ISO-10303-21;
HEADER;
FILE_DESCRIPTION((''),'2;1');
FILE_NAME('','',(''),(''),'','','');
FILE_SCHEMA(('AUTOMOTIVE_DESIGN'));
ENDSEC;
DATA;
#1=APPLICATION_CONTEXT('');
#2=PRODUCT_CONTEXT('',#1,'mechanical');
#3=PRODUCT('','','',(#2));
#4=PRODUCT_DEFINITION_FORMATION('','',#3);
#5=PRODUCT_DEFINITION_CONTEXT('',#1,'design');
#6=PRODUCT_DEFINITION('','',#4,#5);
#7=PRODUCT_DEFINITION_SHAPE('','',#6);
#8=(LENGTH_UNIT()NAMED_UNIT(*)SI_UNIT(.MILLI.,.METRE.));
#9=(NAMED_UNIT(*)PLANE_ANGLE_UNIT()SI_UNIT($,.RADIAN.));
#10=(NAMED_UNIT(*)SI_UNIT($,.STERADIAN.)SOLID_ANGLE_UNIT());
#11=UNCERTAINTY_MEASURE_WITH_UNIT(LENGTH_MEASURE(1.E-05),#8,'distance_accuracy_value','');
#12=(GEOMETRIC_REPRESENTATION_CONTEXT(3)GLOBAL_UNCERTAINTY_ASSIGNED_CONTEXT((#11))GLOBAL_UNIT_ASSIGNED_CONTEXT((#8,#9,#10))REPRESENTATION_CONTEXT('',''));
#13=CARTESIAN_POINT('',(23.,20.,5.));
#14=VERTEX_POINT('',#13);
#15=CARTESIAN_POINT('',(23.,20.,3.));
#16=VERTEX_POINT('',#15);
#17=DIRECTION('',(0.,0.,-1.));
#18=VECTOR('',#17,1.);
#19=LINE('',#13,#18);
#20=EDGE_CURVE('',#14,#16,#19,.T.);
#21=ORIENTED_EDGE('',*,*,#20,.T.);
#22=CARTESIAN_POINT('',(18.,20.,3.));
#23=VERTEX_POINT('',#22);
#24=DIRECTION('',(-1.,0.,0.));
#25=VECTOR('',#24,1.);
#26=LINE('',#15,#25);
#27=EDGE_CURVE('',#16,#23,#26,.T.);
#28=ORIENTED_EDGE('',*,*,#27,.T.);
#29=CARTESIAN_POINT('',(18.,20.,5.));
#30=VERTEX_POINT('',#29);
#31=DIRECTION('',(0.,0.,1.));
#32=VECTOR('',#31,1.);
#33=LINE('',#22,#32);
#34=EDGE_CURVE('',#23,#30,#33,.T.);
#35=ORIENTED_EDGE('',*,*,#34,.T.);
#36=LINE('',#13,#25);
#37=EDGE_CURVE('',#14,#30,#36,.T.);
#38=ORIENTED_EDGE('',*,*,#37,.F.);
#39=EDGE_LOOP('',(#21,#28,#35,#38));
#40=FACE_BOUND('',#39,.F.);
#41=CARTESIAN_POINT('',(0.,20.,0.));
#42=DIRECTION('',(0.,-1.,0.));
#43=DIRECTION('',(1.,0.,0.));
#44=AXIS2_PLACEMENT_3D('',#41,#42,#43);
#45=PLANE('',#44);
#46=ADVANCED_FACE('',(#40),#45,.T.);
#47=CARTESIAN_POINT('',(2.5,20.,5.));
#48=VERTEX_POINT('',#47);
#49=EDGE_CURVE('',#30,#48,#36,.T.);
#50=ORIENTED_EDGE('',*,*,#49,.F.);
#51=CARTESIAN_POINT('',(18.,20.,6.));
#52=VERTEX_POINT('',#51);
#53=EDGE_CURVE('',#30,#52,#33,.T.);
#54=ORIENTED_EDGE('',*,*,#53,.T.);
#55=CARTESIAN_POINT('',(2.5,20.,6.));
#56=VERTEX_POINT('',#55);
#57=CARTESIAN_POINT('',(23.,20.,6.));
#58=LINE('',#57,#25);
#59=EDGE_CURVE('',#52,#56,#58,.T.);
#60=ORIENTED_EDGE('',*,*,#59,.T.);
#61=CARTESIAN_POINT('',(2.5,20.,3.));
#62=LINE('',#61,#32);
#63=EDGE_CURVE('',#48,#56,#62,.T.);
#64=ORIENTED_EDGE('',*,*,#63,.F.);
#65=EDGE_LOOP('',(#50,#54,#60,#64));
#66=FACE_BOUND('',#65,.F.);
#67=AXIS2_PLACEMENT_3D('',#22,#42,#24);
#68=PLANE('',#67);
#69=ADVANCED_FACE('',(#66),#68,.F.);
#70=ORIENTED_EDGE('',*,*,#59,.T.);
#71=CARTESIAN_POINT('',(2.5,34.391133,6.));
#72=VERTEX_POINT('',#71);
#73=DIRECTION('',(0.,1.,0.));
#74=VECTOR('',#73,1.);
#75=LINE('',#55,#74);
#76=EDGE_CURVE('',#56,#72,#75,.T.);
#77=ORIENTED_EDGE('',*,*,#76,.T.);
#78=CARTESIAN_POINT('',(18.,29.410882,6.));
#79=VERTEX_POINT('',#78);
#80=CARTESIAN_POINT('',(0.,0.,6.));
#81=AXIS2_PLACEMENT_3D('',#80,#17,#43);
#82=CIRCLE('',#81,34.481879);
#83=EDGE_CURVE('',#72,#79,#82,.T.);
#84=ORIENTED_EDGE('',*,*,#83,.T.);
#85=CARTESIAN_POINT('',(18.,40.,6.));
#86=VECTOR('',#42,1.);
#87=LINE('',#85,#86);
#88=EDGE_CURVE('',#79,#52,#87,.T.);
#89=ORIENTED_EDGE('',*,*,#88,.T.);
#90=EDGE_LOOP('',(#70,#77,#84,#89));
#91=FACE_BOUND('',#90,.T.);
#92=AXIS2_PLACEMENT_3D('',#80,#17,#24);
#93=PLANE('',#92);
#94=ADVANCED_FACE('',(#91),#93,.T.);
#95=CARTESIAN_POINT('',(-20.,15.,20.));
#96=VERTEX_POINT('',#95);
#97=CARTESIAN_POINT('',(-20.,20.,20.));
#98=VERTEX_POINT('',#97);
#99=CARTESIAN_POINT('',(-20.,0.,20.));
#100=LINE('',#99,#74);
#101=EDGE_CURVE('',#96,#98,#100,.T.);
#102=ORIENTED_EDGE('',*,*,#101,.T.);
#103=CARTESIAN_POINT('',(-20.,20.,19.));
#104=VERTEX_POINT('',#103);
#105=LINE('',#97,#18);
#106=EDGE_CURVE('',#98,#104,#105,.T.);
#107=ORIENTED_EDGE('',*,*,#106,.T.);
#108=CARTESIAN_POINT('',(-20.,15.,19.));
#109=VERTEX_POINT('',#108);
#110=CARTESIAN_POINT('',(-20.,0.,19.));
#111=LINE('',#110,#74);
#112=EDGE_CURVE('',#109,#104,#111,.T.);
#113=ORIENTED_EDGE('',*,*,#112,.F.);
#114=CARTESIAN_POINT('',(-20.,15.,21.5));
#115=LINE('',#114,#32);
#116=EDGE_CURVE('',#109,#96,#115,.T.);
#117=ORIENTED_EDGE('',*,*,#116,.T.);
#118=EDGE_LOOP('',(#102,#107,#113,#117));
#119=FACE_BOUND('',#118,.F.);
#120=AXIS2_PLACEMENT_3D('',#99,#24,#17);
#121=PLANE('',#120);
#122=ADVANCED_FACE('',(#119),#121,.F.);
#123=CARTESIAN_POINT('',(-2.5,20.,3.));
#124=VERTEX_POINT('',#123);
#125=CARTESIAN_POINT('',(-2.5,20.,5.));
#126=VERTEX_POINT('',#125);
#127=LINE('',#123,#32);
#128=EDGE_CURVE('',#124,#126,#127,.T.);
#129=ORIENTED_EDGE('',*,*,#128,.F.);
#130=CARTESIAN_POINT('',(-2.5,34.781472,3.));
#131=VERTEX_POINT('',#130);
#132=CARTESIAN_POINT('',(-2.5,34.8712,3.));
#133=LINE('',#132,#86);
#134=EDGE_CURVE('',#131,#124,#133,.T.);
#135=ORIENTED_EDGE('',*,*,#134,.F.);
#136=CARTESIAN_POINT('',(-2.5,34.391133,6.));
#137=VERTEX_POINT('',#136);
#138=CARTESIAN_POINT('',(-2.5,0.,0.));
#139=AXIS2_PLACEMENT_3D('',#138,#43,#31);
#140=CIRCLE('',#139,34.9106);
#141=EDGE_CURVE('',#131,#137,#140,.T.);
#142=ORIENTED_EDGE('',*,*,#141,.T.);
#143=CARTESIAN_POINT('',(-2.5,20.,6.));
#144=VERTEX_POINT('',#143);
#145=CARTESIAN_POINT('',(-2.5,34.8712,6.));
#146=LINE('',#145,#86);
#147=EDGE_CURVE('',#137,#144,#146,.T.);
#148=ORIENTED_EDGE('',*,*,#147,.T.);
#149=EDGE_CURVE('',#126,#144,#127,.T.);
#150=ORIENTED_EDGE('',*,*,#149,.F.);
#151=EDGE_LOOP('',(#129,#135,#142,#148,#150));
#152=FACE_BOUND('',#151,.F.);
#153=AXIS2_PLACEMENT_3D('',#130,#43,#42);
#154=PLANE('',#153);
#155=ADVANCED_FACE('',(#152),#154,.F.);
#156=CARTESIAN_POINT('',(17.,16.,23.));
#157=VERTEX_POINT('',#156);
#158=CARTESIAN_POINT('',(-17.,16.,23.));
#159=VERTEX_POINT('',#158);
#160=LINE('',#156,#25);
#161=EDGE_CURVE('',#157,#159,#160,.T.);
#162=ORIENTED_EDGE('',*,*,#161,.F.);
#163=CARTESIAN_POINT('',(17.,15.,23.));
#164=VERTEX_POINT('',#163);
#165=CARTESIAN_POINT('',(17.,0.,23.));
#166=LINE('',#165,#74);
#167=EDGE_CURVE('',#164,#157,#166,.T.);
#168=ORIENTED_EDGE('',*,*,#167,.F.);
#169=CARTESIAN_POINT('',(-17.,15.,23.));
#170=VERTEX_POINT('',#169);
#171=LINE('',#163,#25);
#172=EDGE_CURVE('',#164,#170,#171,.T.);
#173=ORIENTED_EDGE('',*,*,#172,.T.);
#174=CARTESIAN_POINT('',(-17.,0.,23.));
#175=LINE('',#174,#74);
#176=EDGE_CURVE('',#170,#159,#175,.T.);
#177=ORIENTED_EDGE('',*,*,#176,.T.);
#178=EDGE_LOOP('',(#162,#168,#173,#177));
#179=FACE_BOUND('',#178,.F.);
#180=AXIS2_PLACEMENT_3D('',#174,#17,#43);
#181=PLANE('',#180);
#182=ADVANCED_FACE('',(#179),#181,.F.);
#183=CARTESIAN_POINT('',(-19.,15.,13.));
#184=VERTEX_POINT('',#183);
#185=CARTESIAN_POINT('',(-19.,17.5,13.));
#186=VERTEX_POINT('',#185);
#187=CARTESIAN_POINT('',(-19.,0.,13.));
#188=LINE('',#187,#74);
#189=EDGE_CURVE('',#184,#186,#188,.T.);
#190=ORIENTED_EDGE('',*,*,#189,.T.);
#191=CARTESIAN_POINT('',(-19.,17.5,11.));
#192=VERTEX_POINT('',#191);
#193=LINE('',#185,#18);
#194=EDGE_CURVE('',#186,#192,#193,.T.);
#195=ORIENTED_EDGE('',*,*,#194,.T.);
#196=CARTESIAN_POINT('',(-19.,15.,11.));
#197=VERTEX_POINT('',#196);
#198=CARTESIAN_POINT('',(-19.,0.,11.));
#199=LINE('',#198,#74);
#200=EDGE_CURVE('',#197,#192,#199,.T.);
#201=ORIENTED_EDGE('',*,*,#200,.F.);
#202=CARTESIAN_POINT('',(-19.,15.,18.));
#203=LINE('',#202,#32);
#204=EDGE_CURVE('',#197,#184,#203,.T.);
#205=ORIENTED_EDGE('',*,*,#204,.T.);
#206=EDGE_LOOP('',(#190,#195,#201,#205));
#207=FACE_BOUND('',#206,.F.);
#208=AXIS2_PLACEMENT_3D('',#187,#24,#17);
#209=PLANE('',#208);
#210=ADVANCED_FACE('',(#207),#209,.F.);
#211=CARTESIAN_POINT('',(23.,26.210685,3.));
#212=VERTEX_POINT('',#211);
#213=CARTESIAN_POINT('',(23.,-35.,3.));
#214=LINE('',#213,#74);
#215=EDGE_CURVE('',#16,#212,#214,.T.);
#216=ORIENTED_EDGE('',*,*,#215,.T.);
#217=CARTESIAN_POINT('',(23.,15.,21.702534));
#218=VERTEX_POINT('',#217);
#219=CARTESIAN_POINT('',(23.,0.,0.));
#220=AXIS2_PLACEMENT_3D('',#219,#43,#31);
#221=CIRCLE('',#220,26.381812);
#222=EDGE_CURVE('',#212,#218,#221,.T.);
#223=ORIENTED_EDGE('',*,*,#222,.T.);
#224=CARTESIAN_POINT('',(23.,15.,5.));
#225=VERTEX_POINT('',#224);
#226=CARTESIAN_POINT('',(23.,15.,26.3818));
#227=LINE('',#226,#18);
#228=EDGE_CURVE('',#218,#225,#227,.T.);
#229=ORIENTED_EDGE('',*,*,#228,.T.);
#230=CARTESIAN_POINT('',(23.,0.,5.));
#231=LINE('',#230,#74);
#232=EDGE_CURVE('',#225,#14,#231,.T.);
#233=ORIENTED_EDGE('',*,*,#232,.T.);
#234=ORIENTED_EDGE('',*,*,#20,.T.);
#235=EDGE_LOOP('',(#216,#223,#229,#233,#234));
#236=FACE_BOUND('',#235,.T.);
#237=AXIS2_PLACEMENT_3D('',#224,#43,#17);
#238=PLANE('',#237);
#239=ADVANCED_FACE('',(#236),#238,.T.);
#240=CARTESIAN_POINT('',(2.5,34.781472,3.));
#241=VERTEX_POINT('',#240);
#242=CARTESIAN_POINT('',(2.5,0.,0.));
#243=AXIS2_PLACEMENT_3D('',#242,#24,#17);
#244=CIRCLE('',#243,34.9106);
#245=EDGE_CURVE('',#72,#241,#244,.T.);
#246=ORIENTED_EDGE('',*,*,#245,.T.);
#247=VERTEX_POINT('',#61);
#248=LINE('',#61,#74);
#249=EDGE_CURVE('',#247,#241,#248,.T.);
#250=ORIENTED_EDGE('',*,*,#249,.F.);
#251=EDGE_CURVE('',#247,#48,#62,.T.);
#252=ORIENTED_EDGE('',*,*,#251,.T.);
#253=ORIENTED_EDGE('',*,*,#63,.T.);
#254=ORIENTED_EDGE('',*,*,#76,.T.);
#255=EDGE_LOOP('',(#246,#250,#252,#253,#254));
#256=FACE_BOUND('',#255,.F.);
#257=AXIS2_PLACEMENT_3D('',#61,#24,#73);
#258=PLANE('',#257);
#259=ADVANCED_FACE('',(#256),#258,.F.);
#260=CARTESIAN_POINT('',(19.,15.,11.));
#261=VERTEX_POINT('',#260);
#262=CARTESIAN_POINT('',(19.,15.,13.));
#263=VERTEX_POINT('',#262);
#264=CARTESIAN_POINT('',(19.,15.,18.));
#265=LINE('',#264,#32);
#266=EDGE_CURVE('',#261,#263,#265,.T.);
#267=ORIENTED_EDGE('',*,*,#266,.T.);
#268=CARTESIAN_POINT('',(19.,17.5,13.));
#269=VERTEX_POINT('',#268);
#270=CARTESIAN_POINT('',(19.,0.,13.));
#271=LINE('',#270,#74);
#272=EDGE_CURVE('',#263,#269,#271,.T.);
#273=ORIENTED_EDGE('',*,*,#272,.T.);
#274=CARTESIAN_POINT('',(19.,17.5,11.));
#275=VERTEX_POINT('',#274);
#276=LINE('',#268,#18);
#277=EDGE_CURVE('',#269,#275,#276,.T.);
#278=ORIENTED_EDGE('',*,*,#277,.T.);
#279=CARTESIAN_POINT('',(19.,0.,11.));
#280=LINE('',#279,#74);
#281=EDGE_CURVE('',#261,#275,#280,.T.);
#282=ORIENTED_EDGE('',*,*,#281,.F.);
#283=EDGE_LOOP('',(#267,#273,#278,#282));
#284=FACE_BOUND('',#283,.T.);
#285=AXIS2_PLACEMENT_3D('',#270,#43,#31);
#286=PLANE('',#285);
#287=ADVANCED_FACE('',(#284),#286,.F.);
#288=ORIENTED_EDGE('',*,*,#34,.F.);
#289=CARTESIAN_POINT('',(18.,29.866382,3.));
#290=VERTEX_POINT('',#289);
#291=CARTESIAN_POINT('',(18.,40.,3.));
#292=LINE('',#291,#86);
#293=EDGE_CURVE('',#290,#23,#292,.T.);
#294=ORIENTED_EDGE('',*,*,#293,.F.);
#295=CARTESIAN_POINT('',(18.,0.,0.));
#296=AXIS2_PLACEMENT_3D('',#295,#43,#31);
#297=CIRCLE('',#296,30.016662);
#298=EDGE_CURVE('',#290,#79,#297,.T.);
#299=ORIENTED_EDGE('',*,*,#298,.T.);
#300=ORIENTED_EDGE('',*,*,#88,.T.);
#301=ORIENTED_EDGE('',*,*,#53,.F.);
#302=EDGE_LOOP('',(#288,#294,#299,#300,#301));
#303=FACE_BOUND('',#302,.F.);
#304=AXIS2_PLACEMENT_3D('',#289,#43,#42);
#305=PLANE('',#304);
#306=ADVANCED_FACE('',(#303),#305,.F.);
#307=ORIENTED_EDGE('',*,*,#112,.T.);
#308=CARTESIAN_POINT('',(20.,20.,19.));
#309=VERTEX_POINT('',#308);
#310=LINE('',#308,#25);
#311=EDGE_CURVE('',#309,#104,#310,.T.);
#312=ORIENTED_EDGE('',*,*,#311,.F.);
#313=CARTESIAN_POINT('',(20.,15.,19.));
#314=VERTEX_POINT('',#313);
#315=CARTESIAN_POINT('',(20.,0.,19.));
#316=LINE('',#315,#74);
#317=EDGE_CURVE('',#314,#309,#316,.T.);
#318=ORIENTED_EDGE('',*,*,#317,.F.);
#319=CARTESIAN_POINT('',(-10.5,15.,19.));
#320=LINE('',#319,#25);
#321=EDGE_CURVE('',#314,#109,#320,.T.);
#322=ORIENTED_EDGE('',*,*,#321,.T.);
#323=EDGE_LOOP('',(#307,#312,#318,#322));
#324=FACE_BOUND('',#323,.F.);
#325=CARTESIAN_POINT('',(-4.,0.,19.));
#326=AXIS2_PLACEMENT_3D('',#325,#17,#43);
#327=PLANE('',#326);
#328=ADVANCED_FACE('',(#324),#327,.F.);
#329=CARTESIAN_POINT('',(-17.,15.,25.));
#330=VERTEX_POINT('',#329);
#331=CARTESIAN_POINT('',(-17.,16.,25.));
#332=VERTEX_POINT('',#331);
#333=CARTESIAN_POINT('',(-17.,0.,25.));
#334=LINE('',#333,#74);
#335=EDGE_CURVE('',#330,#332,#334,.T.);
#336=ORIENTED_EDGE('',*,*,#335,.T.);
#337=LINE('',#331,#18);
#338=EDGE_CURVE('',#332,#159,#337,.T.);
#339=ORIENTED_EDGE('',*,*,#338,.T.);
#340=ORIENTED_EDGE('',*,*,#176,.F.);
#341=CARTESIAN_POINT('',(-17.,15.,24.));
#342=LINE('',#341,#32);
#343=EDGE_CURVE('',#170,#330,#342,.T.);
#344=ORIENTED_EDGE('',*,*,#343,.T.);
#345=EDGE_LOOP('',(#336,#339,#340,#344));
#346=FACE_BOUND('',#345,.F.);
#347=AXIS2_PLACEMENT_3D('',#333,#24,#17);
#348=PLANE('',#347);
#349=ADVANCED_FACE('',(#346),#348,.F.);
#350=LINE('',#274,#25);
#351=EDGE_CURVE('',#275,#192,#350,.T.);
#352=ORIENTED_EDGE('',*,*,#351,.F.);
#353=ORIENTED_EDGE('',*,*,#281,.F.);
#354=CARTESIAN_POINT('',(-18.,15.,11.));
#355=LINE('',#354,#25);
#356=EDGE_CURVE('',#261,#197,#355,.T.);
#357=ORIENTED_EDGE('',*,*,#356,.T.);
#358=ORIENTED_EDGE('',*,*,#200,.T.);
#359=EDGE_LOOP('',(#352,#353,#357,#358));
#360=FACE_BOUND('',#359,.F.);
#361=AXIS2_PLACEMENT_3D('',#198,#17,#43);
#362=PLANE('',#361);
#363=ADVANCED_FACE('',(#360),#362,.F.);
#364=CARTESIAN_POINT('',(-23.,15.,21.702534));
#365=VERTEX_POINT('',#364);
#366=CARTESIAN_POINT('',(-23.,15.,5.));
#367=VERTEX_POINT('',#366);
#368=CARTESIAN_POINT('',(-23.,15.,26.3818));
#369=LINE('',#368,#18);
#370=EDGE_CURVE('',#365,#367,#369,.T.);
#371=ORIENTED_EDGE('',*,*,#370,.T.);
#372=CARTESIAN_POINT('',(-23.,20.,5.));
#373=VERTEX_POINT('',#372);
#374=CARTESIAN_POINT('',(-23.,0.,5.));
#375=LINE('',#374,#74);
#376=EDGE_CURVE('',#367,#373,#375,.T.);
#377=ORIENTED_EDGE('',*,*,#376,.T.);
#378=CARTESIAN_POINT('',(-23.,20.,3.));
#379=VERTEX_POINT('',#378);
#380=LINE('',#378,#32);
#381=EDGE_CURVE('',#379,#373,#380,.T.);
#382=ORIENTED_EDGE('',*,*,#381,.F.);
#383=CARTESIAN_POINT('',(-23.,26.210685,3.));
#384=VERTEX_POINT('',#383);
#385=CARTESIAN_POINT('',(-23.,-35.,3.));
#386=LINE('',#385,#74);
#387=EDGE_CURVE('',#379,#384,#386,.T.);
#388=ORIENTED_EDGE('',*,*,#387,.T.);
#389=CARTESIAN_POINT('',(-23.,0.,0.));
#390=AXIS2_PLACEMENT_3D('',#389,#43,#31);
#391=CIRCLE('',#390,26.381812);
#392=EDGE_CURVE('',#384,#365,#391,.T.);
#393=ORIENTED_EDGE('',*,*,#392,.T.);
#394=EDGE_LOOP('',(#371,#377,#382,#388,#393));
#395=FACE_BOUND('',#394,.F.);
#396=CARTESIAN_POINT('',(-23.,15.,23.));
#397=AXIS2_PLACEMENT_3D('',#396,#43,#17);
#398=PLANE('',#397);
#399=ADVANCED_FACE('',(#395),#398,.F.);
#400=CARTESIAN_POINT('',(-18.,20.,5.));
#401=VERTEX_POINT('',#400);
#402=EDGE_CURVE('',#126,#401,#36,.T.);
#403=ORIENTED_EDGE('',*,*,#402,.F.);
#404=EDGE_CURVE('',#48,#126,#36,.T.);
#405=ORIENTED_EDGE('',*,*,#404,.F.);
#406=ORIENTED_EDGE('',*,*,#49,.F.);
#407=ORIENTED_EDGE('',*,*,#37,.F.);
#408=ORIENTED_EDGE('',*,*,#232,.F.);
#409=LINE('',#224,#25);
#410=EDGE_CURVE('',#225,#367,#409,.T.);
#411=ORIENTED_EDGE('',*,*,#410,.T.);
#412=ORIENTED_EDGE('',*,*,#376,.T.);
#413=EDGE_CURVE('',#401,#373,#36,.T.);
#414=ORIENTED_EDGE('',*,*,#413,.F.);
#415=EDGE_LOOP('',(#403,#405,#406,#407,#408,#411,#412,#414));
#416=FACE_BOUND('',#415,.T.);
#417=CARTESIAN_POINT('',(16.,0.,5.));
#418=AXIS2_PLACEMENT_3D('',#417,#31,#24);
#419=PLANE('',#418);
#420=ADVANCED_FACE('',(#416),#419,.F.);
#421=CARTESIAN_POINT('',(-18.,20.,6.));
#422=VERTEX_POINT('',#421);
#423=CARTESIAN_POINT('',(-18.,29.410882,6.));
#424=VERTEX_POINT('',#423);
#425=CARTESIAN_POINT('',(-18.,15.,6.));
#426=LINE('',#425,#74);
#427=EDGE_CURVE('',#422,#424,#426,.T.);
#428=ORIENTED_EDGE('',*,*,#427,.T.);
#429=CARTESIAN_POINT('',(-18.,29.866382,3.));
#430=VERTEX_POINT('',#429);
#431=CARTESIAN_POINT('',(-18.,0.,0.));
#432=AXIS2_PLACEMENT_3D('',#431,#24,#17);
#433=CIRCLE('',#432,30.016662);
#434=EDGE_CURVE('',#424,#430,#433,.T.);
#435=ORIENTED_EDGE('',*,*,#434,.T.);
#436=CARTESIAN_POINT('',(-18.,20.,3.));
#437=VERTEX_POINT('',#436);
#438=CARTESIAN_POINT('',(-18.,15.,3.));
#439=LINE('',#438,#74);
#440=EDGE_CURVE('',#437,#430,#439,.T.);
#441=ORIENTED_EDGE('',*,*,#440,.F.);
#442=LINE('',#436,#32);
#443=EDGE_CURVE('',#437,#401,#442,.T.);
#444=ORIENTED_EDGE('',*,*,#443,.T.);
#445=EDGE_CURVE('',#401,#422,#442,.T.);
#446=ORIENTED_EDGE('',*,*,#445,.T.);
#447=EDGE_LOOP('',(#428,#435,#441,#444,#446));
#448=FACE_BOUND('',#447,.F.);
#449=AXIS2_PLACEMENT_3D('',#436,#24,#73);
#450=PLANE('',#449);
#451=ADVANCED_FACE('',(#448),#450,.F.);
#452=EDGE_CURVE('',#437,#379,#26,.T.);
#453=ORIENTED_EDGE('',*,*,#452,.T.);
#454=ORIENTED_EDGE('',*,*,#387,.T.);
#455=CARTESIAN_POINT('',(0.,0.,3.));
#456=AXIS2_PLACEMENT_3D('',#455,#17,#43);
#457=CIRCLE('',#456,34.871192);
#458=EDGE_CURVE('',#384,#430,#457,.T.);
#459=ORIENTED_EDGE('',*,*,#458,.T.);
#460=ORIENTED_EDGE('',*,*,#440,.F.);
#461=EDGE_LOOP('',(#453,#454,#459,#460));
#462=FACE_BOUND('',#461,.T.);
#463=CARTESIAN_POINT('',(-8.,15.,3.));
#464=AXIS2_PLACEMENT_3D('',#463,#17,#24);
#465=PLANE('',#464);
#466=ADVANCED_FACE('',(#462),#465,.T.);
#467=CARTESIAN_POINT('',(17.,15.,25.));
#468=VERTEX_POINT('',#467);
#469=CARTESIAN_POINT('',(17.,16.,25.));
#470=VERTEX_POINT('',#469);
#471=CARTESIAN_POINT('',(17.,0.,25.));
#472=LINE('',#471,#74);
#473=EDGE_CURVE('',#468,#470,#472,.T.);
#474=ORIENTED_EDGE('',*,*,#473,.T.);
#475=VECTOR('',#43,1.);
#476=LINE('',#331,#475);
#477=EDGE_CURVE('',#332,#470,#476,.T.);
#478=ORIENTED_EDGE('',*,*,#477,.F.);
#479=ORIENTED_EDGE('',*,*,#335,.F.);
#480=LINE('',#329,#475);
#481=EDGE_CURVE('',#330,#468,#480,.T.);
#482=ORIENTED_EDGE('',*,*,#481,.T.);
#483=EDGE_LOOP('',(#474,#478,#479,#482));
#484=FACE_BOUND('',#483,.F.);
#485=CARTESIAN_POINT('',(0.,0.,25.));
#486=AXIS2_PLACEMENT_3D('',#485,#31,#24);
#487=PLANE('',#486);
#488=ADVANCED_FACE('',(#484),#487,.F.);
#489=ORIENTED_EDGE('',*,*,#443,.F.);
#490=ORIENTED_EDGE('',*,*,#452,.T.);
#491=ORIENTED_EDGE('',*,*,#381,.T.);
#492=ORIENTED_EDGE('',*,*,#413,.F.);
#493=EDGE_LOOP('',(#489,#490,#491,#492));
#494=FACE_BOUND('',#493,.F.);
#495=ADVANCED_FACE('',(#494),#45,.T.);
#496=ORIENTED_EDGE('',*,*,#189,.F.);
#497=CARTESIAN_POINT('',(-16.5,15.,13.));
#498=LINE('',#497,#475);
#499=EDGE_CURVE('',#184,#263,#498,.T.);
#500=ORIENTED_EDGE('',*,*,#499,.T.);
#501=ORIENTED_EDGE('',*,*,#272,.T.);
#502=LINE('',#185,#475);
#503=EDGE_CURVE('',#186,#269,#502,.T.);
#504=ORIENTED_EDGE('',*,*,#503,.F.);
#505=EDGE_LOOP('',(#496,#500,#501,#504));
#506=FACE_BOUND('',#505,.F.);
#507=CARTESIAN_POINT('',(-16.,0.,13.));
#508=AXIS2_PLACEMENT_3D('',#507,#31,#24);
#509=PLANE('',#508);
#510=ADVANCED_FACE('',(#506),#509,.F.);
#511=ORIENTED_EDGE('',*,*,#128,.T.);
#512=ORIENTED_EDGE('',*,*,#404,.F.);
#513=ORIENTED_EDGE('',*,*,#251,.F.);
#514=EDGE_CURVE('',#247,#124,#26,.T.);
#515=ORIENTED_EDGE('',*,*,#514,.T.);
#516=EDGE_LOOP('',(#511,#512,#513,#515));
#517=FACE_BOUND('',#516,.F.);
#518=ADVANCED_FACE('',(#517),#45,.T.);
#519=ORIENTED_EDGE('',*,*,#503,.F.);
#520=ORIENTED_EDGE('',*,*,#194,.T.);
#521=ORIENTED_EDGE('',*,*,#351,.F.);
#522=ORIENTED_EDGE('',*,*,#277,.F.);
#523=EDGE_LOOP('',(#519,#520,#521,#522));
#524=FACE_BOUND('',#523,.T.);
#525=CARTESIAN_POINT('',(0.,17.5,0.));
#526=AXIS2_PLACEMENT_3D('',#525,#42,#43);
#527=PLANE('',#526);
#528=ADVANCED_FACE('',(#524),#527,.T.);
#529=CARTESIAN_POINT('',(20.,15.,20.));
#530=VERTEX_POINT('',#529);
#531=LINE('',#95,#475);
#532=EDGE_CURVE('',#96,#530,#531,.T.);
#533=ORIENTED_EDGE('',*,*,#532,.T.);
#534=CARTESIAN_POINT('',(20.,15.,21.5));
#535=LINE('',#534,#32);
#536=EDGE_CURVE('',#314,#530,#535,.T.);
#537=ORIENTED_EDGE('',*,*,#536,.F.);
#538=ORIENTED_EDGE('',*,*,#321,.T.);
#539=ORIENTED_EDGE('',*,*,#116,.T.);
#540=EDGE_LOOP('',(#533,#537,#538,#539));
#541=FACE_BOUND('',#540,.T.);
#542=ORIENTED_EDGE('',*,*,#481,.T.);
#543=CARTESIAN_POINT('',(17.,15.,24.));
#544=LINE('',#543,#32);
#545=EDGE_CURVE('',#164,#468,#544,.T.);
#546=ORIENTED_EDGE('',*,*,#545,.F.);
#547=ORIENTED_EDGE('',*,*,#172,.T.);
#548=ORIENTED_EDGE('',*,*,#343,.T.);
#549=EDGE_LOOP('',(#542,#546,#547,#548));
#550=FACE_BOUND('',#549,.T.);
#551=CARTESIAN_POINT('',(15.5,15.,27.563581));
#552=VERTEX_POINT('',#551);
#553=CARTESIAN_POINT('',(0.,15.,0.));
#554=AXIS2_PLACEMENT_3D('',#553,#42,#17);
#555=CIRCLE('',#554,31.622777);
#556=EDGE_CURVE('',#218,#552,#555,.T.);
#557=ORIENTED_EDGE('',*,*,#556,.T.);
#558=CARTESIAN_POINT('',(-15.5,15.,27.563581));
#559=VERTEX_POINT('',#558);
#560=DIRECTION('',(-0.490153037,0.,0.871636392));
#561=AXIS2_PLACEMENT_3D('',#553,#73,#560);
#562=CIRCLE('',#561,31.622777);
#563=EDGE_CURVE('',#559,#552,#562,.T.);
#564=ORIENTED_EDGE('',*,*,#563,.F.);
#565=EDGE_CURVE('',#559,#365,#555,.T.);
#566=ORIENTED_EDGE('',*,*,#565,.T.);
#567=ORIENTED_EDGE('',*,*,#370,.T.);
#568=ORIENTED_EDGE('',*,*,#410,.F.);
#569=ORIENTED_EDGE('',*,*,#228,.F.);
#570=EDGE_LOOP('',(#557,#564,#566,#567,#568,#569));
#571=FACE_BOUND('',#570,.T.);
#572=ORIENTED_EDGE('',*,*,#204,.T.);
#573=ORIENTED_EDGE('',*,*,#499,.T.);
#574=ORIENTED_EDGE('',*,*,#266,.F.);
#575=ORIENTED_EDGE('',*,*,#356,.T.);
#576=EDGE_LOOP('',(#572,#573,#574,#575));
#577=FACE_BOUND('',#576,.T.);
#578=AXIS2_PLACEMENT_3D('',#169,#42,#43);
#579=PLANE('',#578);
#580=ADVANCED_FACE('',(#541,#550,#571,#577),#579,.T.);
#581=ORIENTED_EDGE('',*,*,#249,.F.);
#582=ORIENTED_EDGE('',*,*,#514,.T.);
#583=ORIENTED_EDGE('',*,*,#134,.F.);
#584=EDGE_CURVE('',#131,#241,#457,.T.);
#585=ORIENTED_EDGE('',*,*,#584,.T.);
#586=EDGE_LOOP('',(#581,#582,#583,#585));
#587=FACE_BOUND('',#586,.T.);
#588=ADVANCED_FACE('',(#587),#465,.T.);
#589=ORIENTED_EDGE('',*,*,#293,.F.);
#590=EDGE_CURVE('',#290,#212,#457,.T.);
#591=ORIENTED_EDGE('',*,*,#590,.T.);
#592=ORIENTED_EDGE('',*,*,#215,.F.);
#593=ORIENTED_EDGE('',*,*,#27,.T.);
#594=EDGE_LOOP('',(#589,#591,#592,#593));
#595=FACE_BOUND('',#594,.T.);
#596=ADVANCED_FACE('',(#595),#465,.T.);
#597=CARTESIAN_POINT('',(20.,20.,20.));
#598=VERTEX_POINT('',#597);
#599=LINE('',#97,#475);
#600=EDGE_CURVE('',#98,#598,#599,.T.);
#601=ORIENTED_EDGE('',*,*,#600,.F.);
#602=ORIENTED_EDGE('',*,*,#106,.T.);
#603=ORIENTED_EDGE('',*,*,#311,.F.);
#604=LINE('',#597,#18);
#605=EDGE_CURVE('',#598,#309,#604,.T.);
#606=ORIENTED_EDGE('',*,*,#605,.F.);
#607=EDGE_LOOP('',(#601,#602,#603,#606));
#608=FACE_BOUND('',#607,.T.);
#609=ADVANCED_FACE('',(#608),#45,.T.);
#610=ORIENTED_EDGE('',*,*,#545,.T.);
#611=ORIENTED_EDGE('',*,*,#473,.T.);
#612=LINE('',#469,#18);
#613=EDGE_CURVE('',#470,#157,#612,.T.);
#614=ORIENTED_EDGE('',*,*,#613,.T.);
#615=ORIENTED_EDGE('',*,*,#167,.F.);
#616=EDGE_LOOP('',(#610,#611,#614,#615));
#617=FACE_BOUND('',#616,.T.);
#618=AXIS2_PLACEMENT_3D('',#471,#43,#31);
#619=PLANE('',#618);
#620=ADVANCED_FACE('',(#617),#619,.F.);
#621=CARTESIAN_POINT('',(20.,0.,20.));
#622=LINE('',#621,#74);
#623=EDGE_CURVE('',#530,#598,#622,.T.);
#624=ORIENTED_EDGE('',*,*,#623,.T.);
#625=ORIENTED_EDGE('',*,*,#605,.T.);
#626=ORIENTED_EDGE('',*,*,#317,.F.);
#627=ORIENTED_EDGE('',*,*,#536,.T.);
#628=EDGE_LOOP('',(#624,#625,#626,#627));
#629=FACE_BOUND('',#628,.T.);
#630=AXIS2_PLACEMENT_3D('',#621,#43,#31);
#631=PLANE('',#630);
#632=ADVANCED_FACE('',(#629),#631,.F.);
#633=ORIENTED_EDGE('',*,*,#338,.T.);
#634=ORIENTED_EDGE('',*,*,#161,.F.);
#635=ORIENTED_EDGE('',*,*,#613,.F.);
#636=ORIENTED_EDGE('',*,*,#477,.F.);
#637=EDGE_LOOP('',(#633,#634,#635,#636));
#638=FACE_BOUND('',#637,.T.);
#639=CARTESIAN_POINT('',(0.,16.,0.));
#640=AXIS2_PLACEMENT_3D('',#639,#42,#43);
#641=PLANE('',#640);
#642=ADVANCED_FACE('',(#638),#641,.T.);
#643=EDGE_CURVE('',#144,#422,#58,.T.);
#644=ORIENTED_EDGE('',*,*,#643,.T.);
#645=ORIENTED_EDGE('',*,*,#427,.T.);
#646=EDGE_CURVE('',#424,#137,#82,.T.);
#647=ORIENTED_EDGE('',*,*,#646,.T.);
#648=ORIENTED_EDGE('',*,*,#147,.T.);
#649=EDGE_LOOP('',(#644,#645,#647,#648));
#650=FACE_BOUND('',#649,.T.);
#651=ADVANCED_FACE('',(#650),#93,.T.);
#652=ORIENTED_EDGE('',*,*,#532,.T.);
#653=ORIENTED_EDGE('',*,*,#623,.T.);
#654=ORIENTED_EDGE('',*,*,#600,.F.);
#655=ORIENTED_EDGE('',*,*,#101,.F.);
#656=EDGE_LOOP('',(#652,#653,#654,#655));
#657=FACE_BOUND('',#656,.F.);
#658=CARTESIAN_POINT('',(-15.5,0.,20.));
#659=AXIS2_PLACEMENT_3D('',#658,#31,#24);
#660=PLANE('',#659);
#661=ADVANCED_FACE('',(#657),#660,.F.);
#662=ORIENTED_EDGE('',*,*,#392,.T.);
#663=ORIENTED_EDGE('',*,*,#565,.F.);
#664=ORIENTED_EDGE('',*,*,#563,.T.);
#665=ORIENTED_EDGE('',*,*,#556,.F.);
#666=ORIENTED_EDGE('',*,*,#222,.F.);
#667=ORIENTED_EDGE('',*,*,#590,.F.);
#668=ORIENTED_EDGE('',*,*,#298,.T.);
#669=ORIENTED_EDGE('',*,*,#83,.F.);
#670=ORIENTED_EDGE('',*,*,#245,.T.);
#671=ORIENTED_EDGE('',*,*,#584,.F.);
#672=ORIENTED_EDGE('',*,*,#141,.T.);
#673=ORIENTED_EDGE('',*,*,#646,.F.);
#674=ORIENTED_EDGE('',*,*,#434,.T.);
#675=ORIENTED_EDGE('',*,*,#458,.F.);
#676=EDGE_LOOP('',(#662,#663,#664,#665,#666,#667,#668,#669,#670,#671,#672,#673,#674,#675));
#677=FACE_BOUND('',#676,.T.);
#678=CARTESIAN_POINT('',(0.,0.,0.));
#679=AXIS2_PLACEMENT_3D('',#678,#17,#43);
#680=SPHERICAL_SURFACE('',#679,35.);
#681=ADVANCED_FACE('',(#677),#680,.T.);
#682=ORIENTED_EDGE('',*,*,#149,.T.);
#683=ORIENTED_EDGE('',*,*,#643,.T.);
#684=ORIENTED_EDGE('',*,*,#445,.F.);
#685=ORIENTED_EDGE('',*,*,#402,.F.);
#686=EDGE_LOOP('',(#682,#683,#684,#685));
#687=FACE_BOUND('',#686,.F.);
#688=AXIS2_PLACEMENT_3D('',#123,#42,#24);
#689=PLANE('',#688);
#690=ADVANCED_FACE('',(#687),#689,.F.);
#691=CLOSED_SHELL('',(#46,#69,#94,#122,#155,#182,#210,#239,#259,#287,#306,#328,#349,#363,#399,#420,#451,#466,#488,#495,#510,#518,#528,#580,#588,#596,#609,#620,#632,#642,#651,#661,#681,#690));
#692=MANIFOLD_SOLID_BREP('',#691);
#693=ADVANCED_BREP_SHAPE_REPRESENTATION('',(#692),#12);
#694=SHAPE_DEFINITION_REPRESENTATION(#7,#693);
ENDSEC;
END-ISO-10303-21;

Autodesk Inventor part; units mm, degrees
ref_plane "YZ Plane" through (0, 0, 0) normal (1, 0, 0) x (0, 1, 0)
sketch "スケッチ1" plane through (0, 0, 0) normal (0, 1, 0) x (-1, 0, 0)
  circle A0 centre (0, 0) radius 35
  line L0 (0, 0) -> (0, -35)
  line L1 (0, 0) -> (0, 35)
  dimension "d0" = 70
revolve "回転1" add sketch "スケッチ1" angle 180 about axis through (0, 0, 0) along (0, 0, 1) picked at (-2.5961, -23.0408) contours L1 L0 A0
sketch "スケッチ5" plane through (0, 0, 0) normal (0, -1, 0) x (1, 0, 0)
  line L0 (-20, -23) -> (20, -23)
  line L1 (20, -23) -> (20, -13)
  line L2 (20, -13) -> (-20, -13)
  line L3 (-20, -13) -> (-20, -23)
  line L4 (-20, -15) -> (-20, -13)
  line L5 (0, 25) -> (-17, 25)
  line L6 (-17, 25) -> (-17, 23)
  line L7 (-17, 23) -> (0, 23)
  line L8 (0, 23) -> (0, 25)
  line L9 (0, 20) -> (-20, 20)
  line L10 (-20, 20) -> (-20, 19)
  line L11 (-20, 19) -> (0, 19)
  line L12 (0, 19) -> (0, 20)
  line L13 (0, 13) -> (-19, 13)
  line L14 (-19, 13) -> (-19, 11)
  line L15 (-19, 11) -> (0, 11)
  line L16 (0, 11) -> (0, 13)
  line L17 (0, 5) -> (-23, 5)
  line L18 (-23, 5) -> (-23, 3)
  line L19 (-23, 3) -> (0, 3)
  line L20 (0, 3) -> (0, 5)
  circle A0 centre (0, 0) radius 35 projected
  circle A1 centre (0, 0) radius 35 projected
  line L21 (0, 35) -> (0, -35)
  line L22 (35, 0) -> (-35, 0)
  line L23 (-32, 2) -> (-23, 2)
  line L24 (-23, 2) -> (-23, -8)
  line L25 (-23, -8) -> (-32, -8)
  line L26 (-32, -8) -> (-32, 2)
  line L27 (-23, -8.0262) -> (-23, 2)
  line L28 (-27, 22.2711) -> (-27, -22.2711)
  line L29 (-15.5, 25) -> (0, 25)
  line L30 (0, 25) -> (0, 35)
  line L31 (0, 35) -> (-15.5, 35)
  line L32 (-15.5, 35) -> (-15.5, 25)
  line L33 (-15.5, 23) -> (0, 23)
  line L34 (0, 23) -> (0, 20)
  line L35 (0, 20) -> (-15.5, 20)
  line L36 (-15.5, 20) -> (-15.5, 23)
  line L37 (-16, 13) -> (0, 13)
  line L38 (0, 13) -> (0, 19)
  line L39 (0, 19) -> (-16, 19)
  line L40 (-16, 19) -> (-16, 13)
  line L41 (-16, 11) -> (0, 11)
  line L42 (0, 11) -> (0, 5)
  line L43 (0, 5) -> (-16, 5)
  line L44 (-16, 5) -> (-16, 11)
  line L45 (-23, -3) -> (-39.6865, -3)
  line L46 (-23, -3) -> (-7.8337, -3)
  line L47 (-8, 3) -> (-23, 3)
  line L48 (-23, 3) -> (-23, -9)
  line L49 (-23, -9) -> (-8, -9)
  line L50 (-8, -9) -> (-8, 3)
  line L51 (-8, 3) -> (-23, -9) construction
  line L52 (-23, 3) -> (-8, -9) construction
  line L53 (-23, 4) -> (-33, 4)
  line L54 (-33, 4) -> (-33, -10)
  line L55 (-33, -10) -> (-23, -10)
  line L56 (-23, -10) -> (-23, 4)
  line L57 (-23, 4) -> (-33, -10) construction
  line L58 (-33, 4) -> (-23, -10) construction
  line L59 (-8, 3) -> (-1, 3)
  line L60 (-1, 3) -> (-1, -9)
  line L61 (-1, -9) -> (-8, -9)
  line L62 (-8, -9) -> (-8, 3)
  line L63 (-8, 3) -> (-1, -9) construction
  line L64 (-1, 3) -> (-8, -9) construction
  line L65 (-23, 2) -> (-27, 2)
  line L66 (-23, -8) -> (-27, -8)
  line L67 (-23, 4) -> (-27, 4)
  line L68 (-23, -10) -> (-27, -10)
  line L69 (23.4307, -26) -> (-23.4307, -26)
  line L70 (-8, 3) -> (-6.8, 3)
  line L71 (-6.8, 3) -> (-6.8, -9)
  line L72 (-6.8, -9) -> (-8, -9)
  line L73 (-8, -9) -> (-8, 3)
  line L74 (-3, 5) -> (0, 5)
  line L75 (0, 20) -> (-4, 20)
  line L76 (-4, 19) -> (0, 19)
  line L77 (0, 19) -> (0, 20)
  line L78 (-6, 5) -> (-1, 5)
  line L79 (-1, 3) -> (-6, 3)
  point P0 (0, -23)
  point P1 (0, -13)
  point P2 (0, 24)
  point P3 (0, 19.5)
  point P4 (0, 12)
  point P5 (0, 4)
  point P6 (-20, -18)
  point P7 (-27, -0.5262)
  point P8 (-27, -8)
  point P9 (-15.5, 21.5)
  point P10 (-15.5, 31.3807)
  point P11 (0, 25)
  point P12 (0, 23)
  point P13 (0, 11)
  point P14 (0, 13)
  point P15 (-27, 0)
  point P16 (-32, 0)
  point P17 (-23, 0)
  point P18 (-15.5, -3)
  point P19 (-28, -3)
  point P20 (-4.5, -3)
  point P21 (-8, -9)
  point P22 (-8, 3)
  point P23 (-27, 0.5)
  point P24 (-28, 0.4738)
  point P25 (-28, -11.5262)
  point P26 (-27, -11.5)
  point P27 (-23, 2)
  point P28 (-23, 2)
  point P29 (-8, 0)
  point P30 (-1, 0)
  point P31 (0, 19)
  point P32 (0, 20)
  point P33 (-27, -10)
  point P34 (-27, 4)
  dimension "d12" = 40
  dimension "d13" = 10
  dimension "d23" = 17
  dimension "d24" = 2
  dimension "d27" = 20
  dimension "d28" = 1
  dimension "d30" = 19
  dimension "d31" = 2
  dimension "d33" = 2
  dimension "d88" = 0
  dimension "d89" = 0
  dimension "d90" = 12
  dimension "d92" = 20
  dimension "d93" = 10
  dimension "d97" = 9
  dimension "d98" = 10
  dimension "d113" = 27
  dimension "d122" = 15.5
  dimension "d123" = 35
  dimension "d124" = 3
  dimension "d125" = 15.5
  dimension "d126" = 6
  dimension "d127" = 6
  dimension "d128" = 16
  dimension "d129" = 16
  dimension "d147" = 12
  dimension "d149" = 8
  dimension "d151" = 15
  dimension "d161" = 14
  dimension "d162" = 10
  dimension "d164" = 12
  dimension "d165" = 7
  dimension "d170" = 26
  dimension "d175" = 1.2
  dimension "d207" = 0
extrude "GNSボード" cut sketch "スケッチ5" against normal blind 16 contours L8 L7 L6 L5
extrude "GNSボード止めるよう" cut sketch "スケッチ5" against normal blind 15 contours L21 L5 L32 A0 | L21 L9 L36 L7
extrude "アルミ板１" cut sketch "スケッチ5" against normal blind 20 contours L11 L10 L9 L12
extrude "メイン基板" cut sketch "スケッチ5" against normal blind 17.5 contours L15 L14 L13 L16
extrude "メイン止めるよう" cut sketch "スケッチ5" against normal blind 14.5 contours L17 L44 L15 L21 | L13 L40 L11 L21
extrude "アルミ板２" cut sketch "スケッチ5" against normal blind 20 contours L19 L18 L17 L20
extrude "電池ボックス入れ" cut sketch "スケッチ5" against normal blind 13 contours L3 L2 L21 L0 | L21 L2 L1 L0
extrude "side ut" cut sketch "スケッチ5" against normal blind 100 contours A0 L45 L54 L55 L28 | A0 L22 L54 L45 | L55 L54 L45 L26 L25 L28 | A0 L28 L53 L54 L22 | L54 L22 L26 L45 | L25 L26 L45 L28 | L54 L53 L28 L23 L26 L22 | L26 L22 L28 L45 | L22 L26 L23 L28
extrude "motor case" add sketch "スケッチ5" against normal blind 7 contours L55 L54 L45 L26 L25 L28 | L28 L25 L27 L48 L56 L55 | L50 L46 L24 L22 | L22 L24 L48 L19 L50 | L54 L22 L26 L45 | L28 L45 L24 L25 | L25 L26 L45 L28 | L24 L45 L28 L22 | L22 L28 L23 L24 | L50 L49 L48 L27 L24 L46 | L54 L53 L28 L23 L26 L22 | L26 L22 L28 L45 | L53 L18 L48 L23 L28 | L22 L26 L23 L28
extrude "bottom cut" cut sketch "スケッチ5" against normal blind 90 contours L69 A0 L21 | L21 A0 L69
extrude "motor" cut sketch "スケッチ5" against normal blind 6 contours L60 L61 L71 L22 | L22 L71 L19 L60 | L71 L61 L50 L22 | L22 L50 L19 L71 | L50 L46 L24 L22 | L22 L24 L48 L19 L50 | L28 L45 L24 L25 | L25 L26 L45 L28 | L24 L45 L28 L22 | L22 L28 L23 L24 | L50 L49 L48 L27 L24 L46 | L26 L22 L28 L45 | L22 L26 L23 L28
extrude "motor block" add sketch "スケッチ5" against normal blind 10 contours L71 L61 L50 L22 | L22 L50 L19 L71
sketch "スケッチ27" plane through (-33, 0, -10) normal (-1, 0, 0) x (0, 0, 1)
  line L0 (14, 0) -> (0, 0) projected
  circle A0 centre (7, 0) radius 3
  point P0 (10, 0)
  dimension "d198" = 6
extrude "押し出し36" cut sketch "スケッチ27" against normal blind 27
mirror "ミラー13" about plane through (0, 0, 0) normal (1, 0, 0) of "メイン止めるよう", "メイン基板", "アルミ板１", "GNSボード止めるよう", "GNSボード", "アルミ板２", "motor", "motor case", "押し出し36", "電池ボックス入れ", "side ut", "motor block"
ref_plane "作業平面5" through (-17, 17.5, 23) normal (0, -1, 0) x (1, 0, 0)
ref_plane "作業平面6" through (20, 13, -13) normal (0, 0, -1) x (1, 0, 0)
sketch "スケッチ38" plane through (20, 13, -13) normal (0, 0, -1) x (1, 0, 0)
  line L0 (-40, 13) -> (0, 13) projected
  line L1 (-40, 13) -> (-40, 0) projected
  line L2 (-40, 0) -> (0, 0) projected
  line L3 (0, 13) -> (0, 0) projected
  line L4 (-38, 6) -> (-28, 6)
  line L5 (-28, 6) -> (-28, -3)
  line L6 (-28, -3) -> (-38, -3)
  line L7 (-38, -3) -> (-38, 6)
  point P0 (-20, 13)
  dimension "d235" = 3
  dimension "d236" = 9
  dimension "d237" = 10
  dimension "d238" = 2
extrude "押し出し44" cut sketch "スケッチ38" against normal blind 18 contours L7 L4 L5 L2 | L2 L5 L6 L7
ref_plane "作業平面7" through (27, 35, 4) normal (0, -1, 0) x (1, 0, 0)
sketch "スケッチ41" plane through (-17, 0, 23) normal (0, -1, 0) x (1, 0, 0)
  line L0 (-16, -23) -> (-15, -23) projected
  line L1 (-15, -23) -> (-15, -21) projected
  line L2 (-15, -21) -> (-6, -21) projected
  line L3 (-6, -21) -> (-6, -18) projected
  line L4 (-6, -18) -> (1, -18) projected
  line L5 (1, -18) -> (1, -12) projected
  line L6 (1, -12) -> (-2, -12) projected
  line L7 (-2, -12) -> (-2, -10) projected
  line L8 (-2, -10) -> (1, -10) projected
  line L9 (1, -10) -> (1, -4) projected
  line L10 (1, -4) -> (-3, -4) projected
  line L11 (-3, -4) -> (-3, -3) projected
  line L12 (-3, -3) -> (1.5, -3) projected
  line L13 (1.5, -3) -> (1.5, 0) projected
  line L14 (1.5, 0) -> (0, 0) projected
  line L15 (0, 0) -> (0, 2) projected
  line L16 (0, 2) -> (1.5, 2) projected
  line L17 (1.5, 2) -> (1.5, 8.3807) projected
  arc A0 (1.5, 8.3807) -> (-10, -0.7289) centre (17, -23) ccw projected
  line L18 (-10, -0.7289) -> (-10, -19) projected
  line L19 (-10, -19) -> (-16, -19) projected
  line L20 (-16, -19) -> (-16, -23) projected
  line L21 (1, -18) -> (1, -12) projected
  line L22 (-2, -10) -> (-2, -12) projected
  line L23 (0, 2) -> (0, 0) projected
  circle A1 centre (-4, 0) radius 2
  dimension "d252" = 4
  dimension "d253" = 4
  dimension "d254" = 3
extrude "押し出し46" cut sketch "スケッチ41" against normal blind 10 contours A1
mirror "ミラー15" about plane through (0, 0, 0) normal (1, 0, 0) of "押し出し46"
sketch "スケッチ42" plane through (-33, 0, -10) normal (0, -1, 0) x (1, 0, 0)
  circle A0 centre (9.5, -8) radius 2
  line L0 (13, -13) -> (13, -3) projected
  line L1 (10, 2) -> (1, 2) projected
  point P0 (33, 10)
  dimension "d257" = 3.5
  dimension "d258" = 4
  dimension "d259" = 10
extrude "押し出し47" cut sketch "スケッチ42" against normal blind 10
mirror "ミラー16" about plane through (0, 0, 0) normal (1, 0, 0) of "押し出し47"
ref_plane "作業平面8" through (-17, 15, 23) normal (0, -1, 0) x (1, 0, 0)
sketch "スケッチ45" plane through (-17, 15, 23) normal (0, -1, 0) x (1, 0, 0)
  circle A0 centre (-4, 0) radius 2 projected
  line L0 (-16, -23) -> (-15, -23) projected
  line L1 (-15, -23) -> (-15, -21) projected
  line L2 (-15, -21) -> (-6, -21) projected
  line L3 (-6, -21) -> (-6, -18) projected
  line L4 (-6, -18) -> (1, -18) projected
  line L5 (1, -18) -> (1, -12) projected
  line L6 (1, -12) -> (-2, -12) projected
  line L7 (-2, -12) -> (-2, -10) projected
  line L8 (-2, -10) -> (1, -10) projected
  line L9 (1, -10) -> (1, -4) projected
  line L10 (1, -4) -> (-3, -4) projected
  line L11 (-3, -4) -> (-3, -3) projected
  line L12 (-3, -3) -> (1.5, -3) projected
  line L13 (1.5, -3) -> (1.5, 0) projected
  line L14 (1.5, 0) -> (0, 0) projected
  line L15 (0, 0) -> (0, 2) projected
  line L16 (0, 2) -> (1.5, 2) projected
  line L17 (1.5, 2) -> (1.5, 8.3807) projected
  arc A1 (1.5, 8.3807) -> (-10, -0.7289) centre (17, -23) ccw projected
  line L18 (-10, -0.7289) -> (-10, -19) projected
  line L19 (-10, -19) -> (-16, -19) projected
  line L20 (-16, -19) -> (-16, -23) projected
  arc A2 (32.5, 4.5636) -> (1.5, 4.5636) centre (17, -23) ccw projected
  line L21 (1.5, 2) -> (1.5, 4.5636) projected
  line L22 (32.5, 2) -> (1.5, 2) projected
  line L23 (32.5, 2) -> (32.5, 4.5636) projected
  circle A3 centre (38, 0) radius 2 projected
  circle A4 centre (38, 0) radius 2 projected
  line L24 (49, -23) -> (50, -23) projected
  line L25 (50, -19) -> (50, -23) projected
  line L26 (44, -19) -> (50, -19) projected
  line L27 (44, -19) -> (44, -0.7289) projected
  arc A5 (44, -0.7289) -> (32.5, 8.3807) centre (17, -23) ccw projected
  line L28 (32.5, 8.3807) -> (32.5, 2) projected
  line L29 (32.5, 2) -> (34, 2) projected
  line L30 (34, 2) -> (34, 0) projected
  line L31 (34, 0) -> (32.5, 0) projected
  line L32 (32.5, 0) -> (32.5, -3) projected
  line L33 (32.5, -3) -> (37, -3) projected
  line L34 (37, -3) -> (37, -4) projected
  line L35 (37, -4) -> (33, -4) projected
  line L36 (33, -4) -> (33, -10) projected
  line L37 (33, -10) -> (36, -10) projected
  line L38 (36, -10) -> (36, -12) projected
  line L39 (36, -12) -> (33, -12) projected
  line L40 (33, -12) -> (33, -18) projected
  line L41 (33, -18) -> (40, -18) projected
  line L42 (40, -18) -> (40, -21) projected
  line L43 (40, -21) -> (49, -21) projected
  line L44 (49, -21) -> (49, -23) projected
  circle A6 centre (-4, 0) radius 2 projected
  line L45 (1.5, 0) -> (32.5, 0) projected
  line L46 (32.5, -3) -> (1.5, -3) projected
  line L47 (32.5, -3) -> (32.5, 0) projected
  line L48 (1.5, 0) -> (32.5, 0) projected
  line L49 (1.5, -3) -> (1.5, 0) projected
  line L50 (34, 0) -> (0, 0) projected
  line L51 (34, 0) -> (34, 2) projected
  line L52 (34, 2) -> (0, 2) projected
  line L53 (0, 0) -> (0, 2) projected
  line L54 (33, -10) -> (1, -10) projected
  line L55 (33, -10) -> (33, -4) projected
  line L56 (1, -4) -> (33, -4) projected
  line L57 (1, -10) -> (1, -4) projected
  line L58 (36, -12) -> (-2, -12) projected
  line L59 (36, -12) -> (36, -10) projected
  line L60 (36, -10) -> (-2, -10) projected
  line L61 (-2, -12) -> (-2, -10) projected
  line L62 (33, -18) -> (1, -18) projected
  line L63 (33, -18) -> (33, -12) projected
  line L64 (1, -12) -> (33, -12) projected
  line L65 (1, -18) -> (1, -12) projected
  line L66 (40, -20) -> (-6, -20) projected
  line L67 (40, -20) -> (40, -18) projected
  line L68 (40, -18) -> (-6, -18) projected
  line L69 (-6, -20) -> (-6, -18) projected
  circle A7 centre (40.5, -41) radius 2 projected
  circle A8 centre (-6.5, -41) radius 2 projected
  line L70 (25, -29) -> (23.8, -29) projected
  line L71 (23.8, -32) -> (23.8, -29) projected
  line L72 (23.8, -32) -> (18, -32) projected
  line L73 (18, -32) -> (18, -20) projected
  line L74 (18, -20) -> (16, -20) projected
  line L75 (16, -20) -> (16, -32) projected
  line L76 (16, -32) -> (10.2, -32) projected
  line L77 (10.2, -32) -> (10.2, -29) projected
  line L78 (10.2, -29) -> (9, -29) projected
  line L79 (9, -29) -> (9, -32) projected
  line L80 (9, -32) -> (-6, -32) projected
  line L81 (-6, -32) -> (-6, -31) projected
  line L82 (-6, -31) -> (-15, -31) projected
  line L83 (-15, -31) -> (-15, -29) projected
  line L84 (-15, -29) -> (-16, -29) projected
  line L85 (-16, -29) -> (-16, -33) projected
  line L86 (-16, -33) -> (-10, -33) projected
  line L87 (-10, -33) -> (-10, -45.2711) projected
  arc A9 (-10, -45.2711) -> (-6.4307, -49) centre (17, -23) ccw projected
  line L88 (-6.4307, -49) -> (40.4307, -49) projected
  arc A10 (40.4307, -49) -> (44, -45.2711) centre (17, -23) ccw projected
  line L89 (44, -45.2711) -> (44, -33) projected
  line L90 (50, -33) -> (44, -33) projected
  line L91 (50, -29) -> (50, -33) projected
  line L92 (50, -29) -> (49, -29) projected
  line L93 (49, -29) -> (49, -31) projected
  line L94 (49, -31) -> (40, -31) projected
  line L95 (40, -31) -> (40, -32) projected
  line L96 (40, -32) -> (25, -32) projected
  line L97 (25, -29) -> (25, -32) projected
  line L98 (-3, -36) -> (37, -36) projected
  line L99 (37, -36) -> (37, -46) projected
  line L100 (37, -46) -> (-3, -46) projected
  line L101 (-3, -46) -> (-3, -36) projected
  line L102 (-6, -18) -> (40, -18)
  line L103 (40, -18) -> (40, 8.6228)
  line L104 (40, 8.6228) -> (-6, 8.6228)
  line L105 (-6, 8.6228) -> (-6, -18)
  arc A11 (32.5, 4.5636) -> (1.5, 4.5636) centre (17, -23) ccw projected
  line L106 (32.5, 4.5636) -> (32.5, 8.3807) projected
  arc A12 (44, -0.7289) -> (32.5, 8.3807) centre (17, -23) ccw projected
  line L107 (44, -0.7289) -> (44, -45.2711) projected
  arc A13 (40.4307, -49) -> (44, -45.2711) centre (17, -23) ccw projected
  line L108 (40.4307, -49) -> (-6.4307, -49) projected
  arc A14 (-10, -45.2711) -> (-6.4307, -49) centre (17, -23) ccw projected
  line L109 (-10, -45.2711) -> (-10, -0.7289) projected
  arc A15 (1.5, 8.3807) -> (-10, -0.7289) centre (17, -23) ccw projected
  line L110 (1.5, 8.3807) -> (1.5, 4.5636) projected
  line L111 (9, -32) -> (9, -20) projected
  line L112 (-6, -20) -> (9, -20) projected
  line L113 (-6, -21) -> (-6, -20) projected
  line L114 (-15, -21) -> (-6, -21) projected
  line L115 (-15, -31) -> (-15, -21) projected
  line L116 (-6, -31) -> (-15, -31) projected
  line L117 (-6, -32) -> (-6, -31) projected
  line L118 (9, -32) -> (-6, -32) projected
  line L119 (50, -29) -> (49, -29) projected
  line L120 (50, -23) -> (50, -29) projected
  line L121 (49, -23) -> (50, -23) projected
  line L122 (49, -29) -> (49, -23) projected
  line L123 (-16, -23) -> (-15, -23) projected
  line L124 (-16, -29) -> (-16, -23) projected
  line L125 (-15, -29) -> (-16, -29) projected
  line L126 (-15, -23) -> (-15, -29) projected
  point P0 (-10, -19)
  point P1 (40, 3.3818)
  point P2 (-6, -20)
  point P3 (-6, -18)
  point P4 (-6, 3.3818)
  point P5 (-10, -31)
  point P6 (44, -31)
  point P7 (-10, -19)
extrude "side and front cut" cut sketch "スケッチ45" along normal mid plane 100 contours L105 L3 L2 L109 L18 A1 | L66 L111 L79 L80 L81 L82 L109 L2 L3 | L109 L2 L1 L0 L20 L19 | L66 L75 L76 L77 L78 L111 | L109 L82 L83 L115 L1 L2 | L66 L73 L72 L71 L70 L97 L96 L95 L94 L107 L89 A10 L88 A9 L87 L109 L82 L81 L80 L79 L78 L77 L76 L75 | L103 A5 L27 L107 L43 L42 | L0 L115 L84 L124 | L109 L86 L85 L84 L83 L82 | L66 L42 L43 L107 L94 L95 L96 L97 L70 L71 L72 L73 | L26 L25 L24 L44 L43 L107 | L43 L44 L122 L93 L94 L107 | L94 L93 L92 L91 L90 L107 | L120 L92 L122 L24 | A7 | A8 | L98 L99 L100 L101
sketch "スケッチ46" plane through (-17, 15, 23) normal (0, -1, 0) x (1, 0, 0)
  line L0 (-6, 0) -> (-6, -18) projected
  line L1 (-6, -18) -> (1, -18) projected
  line L2 (1, -18) -> (1, -12) projected
  line L3 (1, -12) -> (-2, -12) projected
  line L4 (-2, -12) -> (-2, -10) projected
  line L5 (-2, -10) -> (1, -10) projected
  line L6 (1, -10) -> (1, -4) projected
  line L7 (1, -4) -> (-3, -4) projected
  line L8 (-3, -4) -> (-3, -3) projected
  line L9 (-3, -3) -> (1.5, -3) projected
  line L10 (1.5, -3) -> (1.5, 0) projected
  line L11 (1.5, 0) -> (0, 0) projected
  line L12 (0, 0) -> (0, 2) projected
  line L13 (0, 2) -> (1.5, 2) projected
  line L14 (1.5, 2) -> (1.5, 8.3807) projected
  arc A0 (1.5, 8.3807) -> (-6, 3.3818) centre (17, -23) ccw projected
  line L15 (-6, 3.3818) -> (-6, 0) projected
  circle A1 centre (-4, 0) radius 2 projected
  circle A2 centre (-4, 0) radius 2 projected
  line L16 (40, -18) -> (40, 0) projected
  circle A3 centre (38, 0) radius 2 projected
  line L17 (40, 0) -> (40, 3.3818) projected
  arc A4 (40, 3.3818) -> (32.5, 8.3807) centre (17, -23) ccw projected
  line L18 (32.5, 8.3807) -> (32.5, 2) projected
  line L19 (32.5, 2) -> (34, 2) projected
  line L20 (34, 2) -> (34, 0) projected
  line L21 (34, 0) -> (32.5, 0) projected
  line L22 (32.5, 0) -> (32.5, -3) projected
  line L23 (32.5, -3) -> (37, -3) projected
  line L24 (37, -3) -> (37, -4) projected
  line L25 (37, -4) -> (33, -4) projected
  line L26 (33, -4) -> (33, -10) projected
  line L27 (33, -10) -> (36, -10) projected
  line L28 (36, -10) -> (36, -12) projected
  line L29 (36, -12) -> (33, -12) projected
  line L30 (33, -12) -> (33, -18) projected
  line L31 (33, -18) -> (40, -18) projected
  arc A5 (32.5, 4.5636) -> (1.5, 4.5636) centre (17, -23) ccw projected
  line L32 (1.5, 2) -> (1.5, 4.5636) projected
  line L33 (32.5, 2) -> (1.5, 2) projected
  line L34 (32.5, 2) -> (32.5, 4.5636) projected
  line L35 (34, 0) -> (0, 0) projected
  line L36 (34, 0) -> (34, 2) projected
  line L37 (34, 2) -> (0, 2) projected
  line L38 (0, 0) -> (0, 2) projected
  line L39 (32.5, -3) -> (1.5, -3) projected
  line L40 (32.5, -3) -> (32.5, 0) projected
  line L41 (1.5, 0) -> (32.5, 0) projected
  line L42 (1.5, -3) -> (1.5, 0) projected
  line L43 (33, -10) -> (1, -10) projected
  line L44 (33, -10) -> (33, -4) projected
  line L45 (1, -4) -> (33, -4) projected
  line L46 (1, -10) -> (1, -4) projected
  line L47 (33, -18) -> (1, -18) projected
  line L48 (33, -18) -> (33, -12) projected
  line L49 (1, -12) -> (33, -12) projected
  line L50 (1, -18) -> (1, -12) projected
  point P0 (32.5, 4.5636)
  point P1 (1.5, 4.5636)
extrude "front cut 2" cut sketch "スケッチ46" along normal blind 100 contours L15 A0 L14 L13 L12 L11 L10 L9 L8 L7 L6 L5 L4 L3 L2 L1 L0 | A1 | L2 L49 L30 L47 | L3 L4 L5 L43 L27 L28 L29 L49 | A3 | L30 L29 L28 L27 L26 L25 L24 L23 L22 L21 L20 L19 L18 A4 L17 L16 L31 | A5 L18 L33 L14 | L33 L19 L20 L21 L35 L11 L12 L13 | L6 L45 L26 L43 | L7 L8 L9 L39 L23 L24 L25 L45 | L35 L22 L39 L10
sketch "スケッチ48" plane through (0, 0, 3) normal (0, 0, -1) x (-1, 0, 0)
  line L0 (-23, 20) -> (23, 20) projected
  line L1 (23, 26.2107) -> (23, 20) projected
  arc A0 (23, 26.2107) -> (-23, 26.2107) centre (0, 0) ccw projected
  line L2 (-23, 26.2107) -> (-23, 20) projected
  line L3 (-23, 15) -> (23, 15) projected
  line L4 (-23, 15) -> (-23, 20) projected
  line L5 (23, 15) -> (23, 20) projected
  line L6 (-23, 40) -> (-18, 40)
  line L7 (-18, 40) -> (-18, 15)
  line L8 (-18, 15) -> (-23, 15)
  line L9 (-23, 15) -> (-23, 40)
  line L10 (18, 40) -> (23, 40)
  line L11 (23, 40) -> (23, 15)
  line L12 (23, 15) -> (18, 15)
  line L13 (18, 15) -> (18, 40)
  line L14 (-2.5, 34.8712) -> (2.5, 34.8712)
  line L15 (2.5, 34.8712) -> (2.5, 20)
  line L16 (2.5, 20) -> (-2.5, 20)
  line L17 (-2.5, 20) -> (-2.5, 34.8712)
  line L18 (0, 0) -> (0, 34.8712)
  point P0 (18, 20)
  point P1 (18, 29.8664)
  point P2 (-18, 29.8664)
  point P3 (-18, 20)
  point P4 (2.5, 34.7815)
  point P5 (2.5, 20)
  point P6 (-2.5, 34.7815)
  dimension "d274" = 25
  dimension "d275" = 5
  dimension "d276" = 25
  dimension "d277" = 5
  dimension "d280" = 5
  dimension "d282" = 2.5
extrude "lock cut" cut sketch "スケッチ48" against normal blind 3 contours L7 A0 L17 L0 | L15 A0 L13 L0
properties part number "body back for main 3" material "ABS プラスチック"
